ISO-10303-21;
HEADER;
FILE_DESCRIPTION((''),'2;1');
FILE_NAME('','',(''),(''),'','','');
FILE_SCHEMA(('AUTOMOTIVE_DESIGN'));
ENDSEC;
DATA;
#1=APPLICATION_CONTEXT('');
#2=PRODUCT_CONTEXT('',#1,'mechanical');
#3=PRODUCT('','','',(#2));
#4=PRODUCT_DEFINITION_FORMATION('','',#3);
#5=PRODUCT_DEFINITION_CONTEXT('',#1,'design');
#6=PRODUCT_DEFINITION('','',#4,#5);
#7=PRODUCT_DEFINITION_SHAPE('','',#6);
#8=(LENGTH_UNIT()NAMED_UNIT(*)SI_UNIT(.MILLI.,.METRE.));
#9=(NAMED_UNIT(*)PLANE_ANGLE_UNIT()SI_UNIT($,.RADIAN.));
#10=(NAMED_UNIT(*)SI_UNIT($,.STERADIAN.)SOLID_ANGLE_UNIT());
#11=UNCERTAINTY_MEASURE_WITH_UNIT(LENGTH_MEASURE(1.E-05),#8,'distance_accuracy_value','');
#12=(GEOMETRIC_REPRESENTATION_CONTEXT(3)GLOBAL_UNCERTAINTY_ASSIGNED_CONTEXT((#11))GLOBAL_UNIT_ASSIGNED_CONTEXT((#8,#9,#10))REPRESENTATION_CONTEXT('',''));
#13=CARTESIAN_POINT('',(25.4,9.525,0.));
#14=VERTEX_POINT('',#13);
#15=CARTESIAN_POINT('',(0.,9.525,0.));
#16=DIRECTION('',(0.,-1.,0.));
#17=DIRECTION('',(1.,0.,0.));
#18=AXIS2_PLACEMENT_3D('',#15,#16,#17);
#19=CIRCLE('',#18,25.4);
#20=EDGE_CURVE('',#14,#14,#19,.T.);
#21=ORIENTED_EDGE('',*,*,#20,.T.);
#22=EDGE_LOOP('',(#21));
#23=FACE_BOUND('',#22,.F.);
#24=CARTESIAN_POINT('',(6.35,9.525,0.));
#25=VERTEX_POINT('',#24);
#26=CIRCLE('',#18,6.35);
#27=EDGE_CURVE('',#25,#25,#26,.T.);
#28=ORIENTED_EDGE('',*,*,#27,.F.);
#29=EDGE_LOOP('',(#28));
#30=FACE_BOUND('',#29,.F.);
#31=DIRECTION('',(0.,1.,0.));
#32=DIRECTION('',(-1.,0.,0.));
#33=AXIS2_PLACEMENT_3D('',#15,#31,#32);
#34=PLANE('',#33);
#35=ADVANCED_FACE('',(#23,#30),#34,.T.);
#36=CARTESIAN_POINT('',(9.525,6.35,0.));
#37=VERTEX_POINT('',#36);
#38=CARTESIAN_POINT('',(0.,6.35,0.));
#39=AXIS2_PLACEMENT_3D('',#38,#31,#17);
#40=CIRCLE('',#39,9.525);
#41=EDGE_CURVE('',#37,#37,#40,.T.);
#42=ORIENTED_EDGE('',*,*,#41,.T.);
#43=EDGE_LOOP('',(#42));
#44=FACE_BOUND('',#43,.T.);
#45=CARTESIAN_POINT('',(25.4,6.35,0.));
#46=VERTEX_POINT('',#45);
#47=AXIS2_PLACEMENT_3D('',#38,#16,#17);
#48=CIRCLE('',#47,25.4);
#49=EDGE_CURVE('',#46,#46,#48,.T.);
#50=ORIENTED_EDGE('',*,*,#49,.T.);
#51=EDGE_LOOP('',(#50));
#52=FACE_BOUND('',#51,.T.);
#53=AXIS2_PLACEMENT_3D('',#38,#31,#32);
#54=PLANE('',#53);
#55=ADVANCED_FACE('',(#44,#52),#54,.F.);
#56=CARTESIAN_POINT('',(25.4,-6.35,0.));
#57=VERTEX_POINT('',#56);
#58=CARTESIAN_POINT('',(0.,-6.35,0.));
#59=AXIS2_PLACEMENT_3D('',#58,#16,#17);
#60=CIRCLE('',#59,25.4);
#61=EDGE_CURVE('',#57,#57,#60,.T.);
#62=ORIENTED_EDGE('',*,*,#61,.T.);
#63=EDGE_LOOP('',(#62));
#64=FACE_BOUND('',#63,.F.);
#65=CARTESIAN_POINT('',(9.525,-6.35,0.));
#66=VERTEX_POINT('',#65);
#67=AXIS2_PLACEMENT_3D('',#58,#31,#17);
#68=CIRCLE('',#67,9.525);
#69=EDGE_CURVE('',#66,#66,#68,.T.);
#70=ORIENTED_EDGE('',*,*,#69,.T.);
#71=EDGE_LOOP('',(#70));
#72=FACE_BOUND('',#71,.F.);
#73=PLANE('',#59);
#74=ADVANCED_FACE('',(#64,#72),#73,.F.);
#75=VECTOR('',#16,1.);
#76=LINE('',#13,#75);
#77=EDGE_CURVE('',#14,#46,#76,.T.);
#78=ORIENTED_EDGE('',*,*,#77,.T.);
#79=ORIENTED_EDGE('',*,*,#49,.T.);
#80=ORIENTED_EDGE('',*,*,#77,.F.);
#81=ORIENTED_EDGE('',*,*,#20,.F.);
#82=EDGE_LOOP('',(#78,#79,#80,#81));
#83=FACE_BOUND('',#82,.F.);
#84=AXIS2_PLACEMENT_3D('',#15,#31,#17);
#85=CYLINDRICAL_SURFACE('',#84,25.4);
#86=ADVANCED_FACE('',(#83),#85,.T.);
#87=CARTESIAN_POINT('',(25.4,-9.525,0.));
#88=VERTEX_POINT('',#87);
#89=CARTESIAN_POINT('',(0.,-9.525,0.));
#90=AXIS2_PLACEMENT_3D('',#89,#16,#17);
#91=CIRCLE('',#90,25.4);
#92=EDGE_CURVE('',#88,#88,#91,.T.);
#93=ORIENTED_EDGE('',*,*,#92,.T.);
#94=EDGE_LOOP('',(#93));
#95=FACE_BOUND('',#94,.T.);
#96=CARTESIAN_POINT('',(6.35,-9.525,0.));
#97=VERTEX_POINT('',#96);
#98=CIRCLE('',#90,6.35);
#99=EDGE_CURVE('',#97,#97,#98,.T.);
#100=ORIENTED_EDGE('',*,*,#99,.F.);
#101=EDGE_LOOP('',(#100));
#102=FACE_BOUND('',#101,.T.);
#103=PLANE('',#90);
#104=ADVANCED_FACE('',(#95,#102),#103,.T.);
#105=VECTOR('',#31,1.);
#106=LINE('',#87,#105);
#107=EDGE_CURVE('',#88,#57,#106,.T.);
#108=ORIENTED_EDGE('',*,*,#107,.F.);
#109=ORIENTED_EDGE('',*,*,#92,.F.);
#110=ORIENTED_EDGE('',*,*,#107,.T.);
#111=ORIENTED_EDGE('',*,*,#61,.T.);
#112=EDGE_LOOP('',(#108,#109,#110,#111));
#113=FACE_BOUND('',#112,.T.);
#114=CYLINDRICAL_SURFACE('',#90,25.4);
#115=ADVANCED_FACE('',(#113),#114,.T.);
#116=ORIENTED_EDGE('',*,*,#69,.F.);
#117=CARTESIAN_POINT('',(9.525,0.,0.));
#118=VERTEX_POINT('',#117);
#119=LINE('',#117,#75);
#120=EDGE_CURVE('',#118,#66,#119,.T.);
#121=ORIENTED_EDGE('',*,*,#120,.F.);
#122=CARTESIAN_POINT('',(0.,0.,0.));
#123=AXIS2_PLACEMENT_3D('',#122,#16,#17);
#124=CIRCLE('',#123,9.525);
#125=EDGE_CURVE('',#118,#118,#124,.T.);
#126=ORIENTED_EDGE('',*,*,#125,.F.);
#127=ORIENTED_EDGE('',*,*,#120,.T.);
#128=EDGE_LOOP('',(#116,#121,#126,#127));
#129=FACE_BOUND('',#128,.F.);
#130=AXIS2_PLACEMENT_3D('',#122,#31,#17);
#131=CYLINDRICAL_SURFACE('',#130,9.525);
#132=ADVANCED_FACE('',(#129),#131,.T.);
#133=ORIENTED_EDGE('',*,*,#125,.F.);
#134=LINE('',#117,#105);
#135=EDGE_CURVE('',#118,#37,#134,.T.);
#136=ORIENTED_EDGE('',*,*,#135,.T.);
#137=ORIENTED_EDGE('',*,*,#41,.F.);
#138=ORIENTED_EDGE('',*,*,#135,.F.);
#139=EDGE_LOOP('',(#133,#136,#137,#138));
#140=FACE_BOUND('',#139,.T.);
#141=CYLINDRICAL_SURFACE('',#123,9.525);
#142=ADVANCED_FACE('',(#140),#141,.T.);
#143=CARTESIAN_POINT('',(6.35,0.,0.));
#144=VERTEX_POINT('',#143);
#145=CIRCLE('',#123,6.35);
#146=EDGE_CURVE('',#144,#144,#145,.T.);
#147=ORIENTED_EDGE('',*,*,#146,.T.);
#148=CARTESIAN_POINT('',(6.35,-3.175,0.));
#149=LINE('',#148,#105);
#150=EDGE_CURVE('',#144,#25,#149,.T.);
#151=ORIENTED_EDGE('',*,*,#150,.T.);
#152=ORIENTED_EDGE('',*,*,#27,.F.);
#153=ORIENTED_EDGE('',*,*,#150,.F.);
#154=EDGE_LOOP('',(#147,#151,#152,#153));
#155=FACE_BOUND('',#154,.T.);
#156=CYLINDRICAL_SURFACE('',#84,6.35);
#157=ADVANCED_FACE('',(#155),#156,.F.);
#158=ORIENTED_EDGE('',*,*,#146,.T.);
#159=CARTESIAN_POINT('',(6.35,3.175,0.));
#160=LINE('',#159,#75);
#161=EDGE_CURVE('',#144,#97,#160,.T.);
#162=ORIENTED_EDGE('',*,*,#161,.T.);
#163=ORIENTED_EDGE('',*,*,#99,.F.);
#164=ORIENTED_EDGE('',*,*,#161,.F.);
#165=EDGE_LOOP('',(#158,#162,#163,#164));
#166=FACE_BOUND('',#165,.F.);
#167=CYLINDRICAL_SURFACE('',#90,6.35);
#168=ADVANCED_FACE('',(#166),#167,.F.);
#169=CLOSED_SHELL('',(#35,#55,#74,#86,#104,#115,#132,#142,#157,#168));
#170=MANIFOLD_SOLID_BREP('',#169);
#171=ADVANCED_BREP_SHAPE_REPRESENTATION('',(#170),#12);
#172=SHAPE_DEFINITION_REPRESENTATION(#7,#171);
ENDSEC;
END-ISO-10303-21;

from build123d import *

# Parameters (mm, degrees)
F0_R     = 9.525
F1_DEPTH = 9.525
F2_R     = 25.4
F3_DEPTH = 3.175
F4_R     = 6.35
F5_DEPTH = 12.7


# Not quite as in the source:
# - a length typed as a fraction of an inch, garbled in the dataset ("3 / 203.2 mm" for 3/8 in), is restored


with BuildPart() as f1:
    # F0 (on Front) → F1 (new body)
    with BuildSketch(Plane.XZ):
        Circle(F0_R)
    extrude(amount=F1_DEPTH)

    # F2 (on face) → F3 (join)
    with BuildSketch(Plane.XZ.offset(9.525)):
        Circle(F2_R)
    extrude(amount=-F3_DEPTH)

    # F4 (on face) → F5 (cut, symmetric)
    with BuildSketch(Plane.XZ.offset(9.525)):
        Circle(F4_R)
    extrude(amount=F5_DEPTH, both=True, mode=Mode.SUBTRACT)

    # F6: F1 across plane


with BuildPart() as f1_1:
    add(f1.part)
    add(f1.part.mirror(Plane.XZ))


solid = f1_1.part
